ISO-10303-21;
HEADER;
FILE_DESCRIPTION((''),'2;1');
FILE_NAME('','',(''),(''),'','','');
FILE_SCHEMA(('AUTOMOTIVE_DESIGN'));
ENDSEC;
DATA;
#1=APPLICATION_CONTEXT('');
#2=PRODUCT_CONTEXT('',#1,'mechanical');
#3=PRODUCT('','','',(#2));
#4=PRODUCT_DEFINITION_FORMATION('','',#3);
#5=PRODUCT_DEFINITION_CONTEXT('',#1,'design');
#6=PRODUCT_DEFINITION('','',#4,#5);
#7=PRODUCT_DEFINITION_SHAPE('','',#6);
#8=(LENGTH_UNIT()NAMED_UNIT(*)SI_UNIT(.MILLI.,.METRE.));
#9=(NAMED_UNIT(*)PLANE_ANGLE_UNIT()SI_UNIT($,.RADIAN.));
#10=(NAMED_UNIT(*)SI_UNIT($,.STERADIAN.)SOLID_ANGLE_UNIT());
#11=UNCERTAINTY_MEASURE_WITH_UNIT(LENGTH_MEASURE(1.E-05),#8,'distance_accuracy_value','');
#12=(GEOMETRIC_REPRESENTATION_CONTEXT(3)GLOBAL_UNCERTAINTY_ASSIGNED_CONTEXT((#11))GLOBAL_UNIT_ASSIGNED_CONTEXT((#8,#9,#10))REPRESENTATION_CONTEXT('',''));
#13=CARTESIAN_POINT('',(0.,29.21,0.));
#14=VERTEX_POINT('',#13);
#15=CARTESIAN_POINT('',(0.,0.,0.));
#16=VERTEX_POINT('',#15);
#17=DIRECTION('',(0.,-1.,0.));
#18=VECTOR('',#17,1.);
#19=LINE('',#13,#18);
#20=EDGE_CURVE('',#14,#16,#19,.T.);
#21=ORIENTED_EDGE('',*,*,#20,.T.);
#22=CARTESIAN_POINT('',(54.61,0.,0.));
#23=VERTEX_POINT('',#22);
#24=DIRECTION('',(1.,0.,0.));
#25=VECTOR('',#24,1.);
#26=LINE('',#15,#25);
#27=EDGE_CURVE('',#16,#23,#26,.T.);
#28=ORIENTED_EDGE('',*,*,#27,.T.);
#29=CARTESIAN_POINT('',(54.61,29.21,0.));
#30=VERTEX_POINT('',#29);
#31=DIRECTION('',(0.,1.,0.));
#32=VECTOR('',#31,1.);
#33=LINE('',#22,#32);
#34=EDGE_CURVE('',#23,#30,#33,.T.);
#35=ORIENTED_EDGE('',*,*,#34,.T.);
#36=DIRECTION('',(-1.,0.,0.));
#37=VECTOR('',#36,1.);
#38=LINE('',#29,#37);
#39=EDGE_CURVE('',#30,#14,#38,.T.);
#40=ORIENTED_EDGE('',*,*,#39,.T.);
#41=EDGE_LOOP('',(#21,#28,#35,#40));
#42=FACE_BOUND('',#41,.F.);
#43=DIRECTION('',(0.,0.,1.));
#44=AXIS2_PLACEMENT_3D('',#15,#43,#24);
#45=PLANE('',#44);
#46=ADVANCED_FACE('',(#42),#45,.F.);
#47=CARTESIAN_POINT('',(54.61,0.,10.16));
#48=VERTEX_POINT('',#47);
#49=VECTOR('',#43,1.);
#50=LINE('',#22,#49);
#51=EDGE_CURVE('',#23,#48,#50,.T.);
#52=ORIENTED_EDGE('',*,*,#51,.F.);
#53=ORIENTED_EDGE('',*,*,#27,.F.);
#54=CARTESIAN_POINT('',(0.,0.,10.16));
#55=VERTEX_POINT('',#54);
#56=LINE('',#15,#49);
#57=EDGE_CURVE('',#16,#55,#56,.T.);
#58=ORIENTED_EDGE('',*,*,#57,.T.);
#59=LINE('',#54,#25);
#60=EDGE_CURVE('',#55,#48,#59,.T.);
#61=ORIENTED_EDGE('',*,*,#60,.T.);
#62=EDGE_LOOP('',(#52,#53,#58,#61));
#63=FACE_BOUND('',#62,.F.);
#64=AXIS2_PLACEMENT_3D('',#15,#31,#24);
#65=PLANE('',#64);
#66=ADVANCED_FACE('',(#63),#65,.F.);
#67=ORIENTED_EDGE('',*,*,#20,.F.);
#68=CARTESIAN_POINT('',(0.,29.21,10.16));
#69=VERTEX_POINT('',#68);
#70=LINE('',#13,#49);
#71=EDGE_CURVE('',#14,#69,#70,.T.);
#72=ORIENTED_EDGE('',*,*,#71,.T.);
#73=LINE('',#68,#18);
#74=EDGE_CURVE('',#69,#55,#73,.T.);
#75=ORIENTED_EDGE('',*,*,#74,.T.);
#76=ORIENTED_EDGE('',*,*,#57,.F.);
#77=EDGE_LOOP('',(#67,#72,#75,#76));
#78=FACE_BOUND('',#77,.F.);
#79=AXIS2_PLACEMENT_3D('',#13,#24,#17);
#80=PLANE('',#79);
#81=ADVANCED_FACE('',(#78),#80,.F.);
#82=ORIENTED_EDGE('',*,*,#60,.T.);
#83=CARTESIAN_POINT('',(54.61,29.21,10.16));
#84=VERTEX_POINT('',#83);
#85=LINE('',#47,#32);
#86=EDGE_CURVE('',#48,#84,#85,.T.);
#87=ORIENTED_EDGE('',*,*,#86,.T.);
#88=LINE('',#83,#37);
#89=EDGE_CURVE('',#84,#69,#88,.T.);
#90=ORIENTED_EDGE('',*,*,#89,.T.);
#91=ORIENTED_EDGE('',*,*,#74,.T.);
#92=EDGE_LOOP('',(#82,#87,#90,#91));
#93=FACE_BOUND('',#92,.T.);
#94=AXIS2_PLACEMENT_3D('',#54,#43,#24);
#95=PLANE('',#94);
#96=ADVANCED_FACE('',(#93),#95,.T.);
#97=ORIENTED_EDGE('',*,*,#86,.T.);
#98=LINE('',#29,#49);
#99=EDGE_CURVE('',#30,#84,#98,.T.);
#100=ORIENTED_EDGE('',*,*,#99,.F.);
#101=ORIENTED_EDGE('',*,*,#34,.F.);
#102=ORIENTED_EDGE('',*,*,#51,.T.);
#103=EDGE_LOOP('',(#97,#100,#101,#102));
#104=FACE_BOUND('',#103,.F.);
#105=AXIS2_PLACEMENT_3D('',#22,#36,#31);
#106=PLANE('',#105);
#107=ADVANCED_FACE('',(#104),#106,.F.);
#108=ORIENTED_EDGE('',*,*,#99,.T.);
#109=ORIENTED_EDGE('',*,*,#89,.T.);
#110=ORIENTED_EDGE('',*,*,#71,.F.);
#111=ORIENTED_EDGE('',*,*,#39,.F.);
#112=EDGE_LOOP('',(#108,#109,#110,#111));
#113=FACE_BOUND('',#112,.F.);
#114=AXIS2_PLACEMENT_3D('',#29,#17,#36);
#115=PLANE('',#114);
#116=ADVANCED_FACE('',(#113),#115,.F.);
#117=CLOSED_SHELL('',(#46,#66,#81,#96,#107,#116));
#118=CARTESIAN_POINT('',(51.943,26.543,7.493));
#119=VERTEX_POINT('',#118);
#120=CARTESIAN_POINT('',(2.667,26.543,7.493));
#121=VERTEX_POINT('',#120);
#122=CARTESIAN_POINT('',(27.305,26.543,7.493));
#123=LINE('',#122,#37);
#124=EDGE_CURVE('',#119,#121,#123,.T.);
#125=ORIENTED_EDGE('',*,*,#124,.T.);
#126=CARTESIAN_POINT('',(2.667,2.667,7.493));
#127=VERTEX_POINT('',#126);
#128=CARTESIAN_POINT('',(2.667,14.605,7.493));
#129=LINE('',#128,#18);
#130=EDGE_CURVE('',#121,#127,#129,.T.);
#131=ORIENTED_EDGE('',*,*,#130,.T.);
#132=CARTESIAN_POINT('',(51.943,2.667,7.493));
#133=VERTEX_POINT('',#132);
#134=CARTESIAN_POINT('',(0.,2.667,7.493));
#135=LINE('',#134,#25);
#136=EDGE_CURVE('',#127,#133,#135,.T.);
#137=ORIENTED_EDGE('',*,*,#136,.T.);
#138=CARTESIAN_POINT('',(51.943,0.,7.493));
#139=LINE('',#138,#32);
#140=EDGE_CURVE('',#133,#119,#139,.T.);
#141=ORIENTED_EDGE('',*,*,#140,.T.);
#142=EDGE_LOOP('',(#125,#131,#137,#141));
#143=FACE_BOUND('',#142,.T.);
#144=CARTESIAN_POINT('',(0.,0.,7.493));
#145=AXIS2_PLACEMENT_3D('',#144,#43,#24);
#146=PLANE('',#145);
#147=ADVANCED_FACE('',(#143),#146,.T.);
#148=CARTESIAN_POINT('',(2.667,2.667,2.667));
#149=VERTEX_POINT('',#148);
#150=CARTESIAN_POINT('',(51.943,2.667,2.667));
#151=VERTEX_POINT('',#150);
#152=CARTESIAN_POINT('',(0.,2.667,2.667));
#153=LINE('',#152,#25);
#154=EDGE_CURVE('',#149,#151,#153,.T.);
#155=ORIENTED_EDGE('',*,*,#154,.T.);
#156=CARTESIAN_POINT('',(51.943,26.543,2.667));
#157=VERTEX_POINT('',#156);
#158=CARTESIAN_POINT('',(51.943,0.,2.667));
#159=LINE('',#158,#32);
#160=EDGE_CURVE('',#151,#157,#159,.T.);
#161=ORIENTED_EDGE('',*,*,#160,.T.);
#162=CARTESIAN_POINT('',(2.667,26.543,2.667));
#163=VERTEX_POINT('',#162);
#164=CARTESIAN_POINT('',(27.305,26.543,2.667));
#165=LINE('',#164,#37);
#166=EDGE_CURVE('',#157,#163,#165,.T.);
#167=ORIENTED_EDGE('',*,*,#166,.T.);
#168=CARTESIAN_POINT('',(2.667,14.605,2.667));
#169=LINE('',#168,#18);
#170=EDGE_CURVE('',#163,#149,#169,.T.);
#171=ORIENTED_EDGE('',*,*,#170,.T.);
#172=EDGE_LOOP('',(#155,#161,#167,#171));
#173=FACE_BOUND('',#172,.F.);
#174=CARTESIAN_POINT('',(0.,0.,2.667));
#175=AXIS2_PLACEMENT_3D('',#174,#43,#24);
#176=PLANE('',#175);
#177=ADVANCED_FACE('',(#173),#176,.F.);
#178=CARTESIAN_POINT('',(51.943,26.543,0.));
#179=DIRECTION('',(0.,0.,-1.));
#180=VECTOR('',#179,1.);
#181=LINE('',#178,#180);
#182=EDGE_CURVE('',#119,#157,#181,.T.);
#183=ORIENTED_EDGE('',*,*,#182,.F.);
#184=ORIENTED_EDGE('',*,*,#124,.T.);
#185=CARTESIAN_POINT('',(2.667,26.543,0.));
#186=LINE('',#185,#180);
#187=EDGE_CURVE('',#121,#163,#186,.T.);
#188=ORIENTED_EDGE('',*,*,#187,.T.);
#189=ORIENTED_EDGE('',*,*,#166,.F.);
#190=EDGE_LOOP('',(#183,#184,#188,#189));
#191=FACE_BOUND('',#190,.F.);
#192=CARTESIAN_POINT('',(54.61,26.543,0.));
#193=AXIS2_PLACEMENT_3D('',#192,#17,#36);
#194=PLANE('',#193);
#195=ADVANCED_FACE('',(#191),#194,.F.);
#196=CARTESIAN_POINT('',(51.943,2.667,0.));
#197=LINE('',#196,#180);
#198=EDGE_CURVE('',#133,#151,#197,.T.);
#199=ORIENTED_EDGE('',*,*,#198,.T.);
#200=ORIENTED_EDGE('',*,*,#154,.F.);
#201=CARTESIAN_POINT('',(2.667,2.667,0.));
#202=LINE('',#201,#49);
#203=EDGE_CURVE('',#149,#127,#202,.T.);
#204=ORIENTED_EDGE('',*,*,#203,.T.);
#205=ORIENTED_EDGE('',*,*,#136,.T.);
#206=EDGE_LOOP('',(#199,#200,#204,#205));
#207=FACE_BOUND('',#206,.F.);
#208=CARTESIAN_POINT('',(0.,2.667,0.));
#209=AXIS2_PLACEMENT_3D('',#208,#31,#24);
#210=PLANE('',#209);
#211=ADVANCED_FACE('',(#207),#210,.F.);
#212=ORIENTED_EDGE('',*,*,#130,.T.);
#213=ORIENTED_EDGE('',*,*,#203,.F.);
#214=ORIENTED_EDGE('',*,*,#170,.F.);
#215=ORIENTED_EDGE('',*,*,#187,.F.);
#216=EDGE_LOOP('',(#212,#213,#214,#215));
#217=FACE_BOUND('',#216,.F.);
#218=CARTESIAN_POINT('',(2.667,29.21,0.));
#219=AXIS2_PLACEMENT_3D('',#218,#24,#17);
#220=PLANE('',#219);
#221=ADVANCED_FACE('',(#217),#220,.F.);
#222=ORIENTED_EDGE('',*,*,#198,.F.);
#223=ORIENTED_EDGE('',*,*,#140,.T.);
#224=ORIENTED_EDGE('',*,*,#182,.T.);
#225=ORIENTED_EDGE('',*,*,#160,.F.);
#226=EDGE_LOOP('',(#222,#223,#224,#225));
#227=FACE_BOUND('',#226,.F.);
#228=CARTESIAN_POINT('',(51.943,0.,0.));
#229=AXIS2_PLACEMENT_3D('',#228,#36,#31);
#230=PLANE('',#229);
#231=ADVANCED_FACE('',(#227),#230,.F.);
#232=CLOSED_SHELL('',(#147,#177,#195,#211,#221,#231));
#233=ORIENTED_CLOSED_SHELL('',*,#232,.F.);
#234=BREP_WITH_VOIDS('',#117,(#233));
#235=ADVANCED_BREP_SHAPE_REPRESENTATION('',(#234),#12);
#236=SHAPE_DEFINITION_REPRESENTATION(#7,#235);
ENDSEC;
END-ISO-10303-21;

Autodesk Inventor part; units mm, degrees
ref_plane "YZ Plane" through (0, 0, 0) normal (1, 0, 0) x (0, 1, 0)
ref_plane "XZ Plane" through (0, 0, 0) normal (0, 1, 0) x (-1, 0, 0)
ref_plane "XY Plane" through (0, 0, 0) normal (0, 0, 1) x (1, 0, 0)
sketch "Sketch1" plane through (0, 0, 0) normal (0, 0, 1) x (1, 0, 0)
  line L0 (0, 0) -> (54.61, 0)
  line L1 (54.61, 0) -> (54.61, 29.21)
  line L2 (54.61, 29.21) -> (0, 29.21)
  line L3 (0, 29.21) -> (0, 0)
  dimension "d0" = 54.61
  dimension "d2" = 29.21
extrude "Extrusion1" add sketch "Sketch1" along normal blind 10.16
shell "Shell1" thickness 2.667 removed faces 0
properties part number "LiPo" material "Aluminum 6061"
